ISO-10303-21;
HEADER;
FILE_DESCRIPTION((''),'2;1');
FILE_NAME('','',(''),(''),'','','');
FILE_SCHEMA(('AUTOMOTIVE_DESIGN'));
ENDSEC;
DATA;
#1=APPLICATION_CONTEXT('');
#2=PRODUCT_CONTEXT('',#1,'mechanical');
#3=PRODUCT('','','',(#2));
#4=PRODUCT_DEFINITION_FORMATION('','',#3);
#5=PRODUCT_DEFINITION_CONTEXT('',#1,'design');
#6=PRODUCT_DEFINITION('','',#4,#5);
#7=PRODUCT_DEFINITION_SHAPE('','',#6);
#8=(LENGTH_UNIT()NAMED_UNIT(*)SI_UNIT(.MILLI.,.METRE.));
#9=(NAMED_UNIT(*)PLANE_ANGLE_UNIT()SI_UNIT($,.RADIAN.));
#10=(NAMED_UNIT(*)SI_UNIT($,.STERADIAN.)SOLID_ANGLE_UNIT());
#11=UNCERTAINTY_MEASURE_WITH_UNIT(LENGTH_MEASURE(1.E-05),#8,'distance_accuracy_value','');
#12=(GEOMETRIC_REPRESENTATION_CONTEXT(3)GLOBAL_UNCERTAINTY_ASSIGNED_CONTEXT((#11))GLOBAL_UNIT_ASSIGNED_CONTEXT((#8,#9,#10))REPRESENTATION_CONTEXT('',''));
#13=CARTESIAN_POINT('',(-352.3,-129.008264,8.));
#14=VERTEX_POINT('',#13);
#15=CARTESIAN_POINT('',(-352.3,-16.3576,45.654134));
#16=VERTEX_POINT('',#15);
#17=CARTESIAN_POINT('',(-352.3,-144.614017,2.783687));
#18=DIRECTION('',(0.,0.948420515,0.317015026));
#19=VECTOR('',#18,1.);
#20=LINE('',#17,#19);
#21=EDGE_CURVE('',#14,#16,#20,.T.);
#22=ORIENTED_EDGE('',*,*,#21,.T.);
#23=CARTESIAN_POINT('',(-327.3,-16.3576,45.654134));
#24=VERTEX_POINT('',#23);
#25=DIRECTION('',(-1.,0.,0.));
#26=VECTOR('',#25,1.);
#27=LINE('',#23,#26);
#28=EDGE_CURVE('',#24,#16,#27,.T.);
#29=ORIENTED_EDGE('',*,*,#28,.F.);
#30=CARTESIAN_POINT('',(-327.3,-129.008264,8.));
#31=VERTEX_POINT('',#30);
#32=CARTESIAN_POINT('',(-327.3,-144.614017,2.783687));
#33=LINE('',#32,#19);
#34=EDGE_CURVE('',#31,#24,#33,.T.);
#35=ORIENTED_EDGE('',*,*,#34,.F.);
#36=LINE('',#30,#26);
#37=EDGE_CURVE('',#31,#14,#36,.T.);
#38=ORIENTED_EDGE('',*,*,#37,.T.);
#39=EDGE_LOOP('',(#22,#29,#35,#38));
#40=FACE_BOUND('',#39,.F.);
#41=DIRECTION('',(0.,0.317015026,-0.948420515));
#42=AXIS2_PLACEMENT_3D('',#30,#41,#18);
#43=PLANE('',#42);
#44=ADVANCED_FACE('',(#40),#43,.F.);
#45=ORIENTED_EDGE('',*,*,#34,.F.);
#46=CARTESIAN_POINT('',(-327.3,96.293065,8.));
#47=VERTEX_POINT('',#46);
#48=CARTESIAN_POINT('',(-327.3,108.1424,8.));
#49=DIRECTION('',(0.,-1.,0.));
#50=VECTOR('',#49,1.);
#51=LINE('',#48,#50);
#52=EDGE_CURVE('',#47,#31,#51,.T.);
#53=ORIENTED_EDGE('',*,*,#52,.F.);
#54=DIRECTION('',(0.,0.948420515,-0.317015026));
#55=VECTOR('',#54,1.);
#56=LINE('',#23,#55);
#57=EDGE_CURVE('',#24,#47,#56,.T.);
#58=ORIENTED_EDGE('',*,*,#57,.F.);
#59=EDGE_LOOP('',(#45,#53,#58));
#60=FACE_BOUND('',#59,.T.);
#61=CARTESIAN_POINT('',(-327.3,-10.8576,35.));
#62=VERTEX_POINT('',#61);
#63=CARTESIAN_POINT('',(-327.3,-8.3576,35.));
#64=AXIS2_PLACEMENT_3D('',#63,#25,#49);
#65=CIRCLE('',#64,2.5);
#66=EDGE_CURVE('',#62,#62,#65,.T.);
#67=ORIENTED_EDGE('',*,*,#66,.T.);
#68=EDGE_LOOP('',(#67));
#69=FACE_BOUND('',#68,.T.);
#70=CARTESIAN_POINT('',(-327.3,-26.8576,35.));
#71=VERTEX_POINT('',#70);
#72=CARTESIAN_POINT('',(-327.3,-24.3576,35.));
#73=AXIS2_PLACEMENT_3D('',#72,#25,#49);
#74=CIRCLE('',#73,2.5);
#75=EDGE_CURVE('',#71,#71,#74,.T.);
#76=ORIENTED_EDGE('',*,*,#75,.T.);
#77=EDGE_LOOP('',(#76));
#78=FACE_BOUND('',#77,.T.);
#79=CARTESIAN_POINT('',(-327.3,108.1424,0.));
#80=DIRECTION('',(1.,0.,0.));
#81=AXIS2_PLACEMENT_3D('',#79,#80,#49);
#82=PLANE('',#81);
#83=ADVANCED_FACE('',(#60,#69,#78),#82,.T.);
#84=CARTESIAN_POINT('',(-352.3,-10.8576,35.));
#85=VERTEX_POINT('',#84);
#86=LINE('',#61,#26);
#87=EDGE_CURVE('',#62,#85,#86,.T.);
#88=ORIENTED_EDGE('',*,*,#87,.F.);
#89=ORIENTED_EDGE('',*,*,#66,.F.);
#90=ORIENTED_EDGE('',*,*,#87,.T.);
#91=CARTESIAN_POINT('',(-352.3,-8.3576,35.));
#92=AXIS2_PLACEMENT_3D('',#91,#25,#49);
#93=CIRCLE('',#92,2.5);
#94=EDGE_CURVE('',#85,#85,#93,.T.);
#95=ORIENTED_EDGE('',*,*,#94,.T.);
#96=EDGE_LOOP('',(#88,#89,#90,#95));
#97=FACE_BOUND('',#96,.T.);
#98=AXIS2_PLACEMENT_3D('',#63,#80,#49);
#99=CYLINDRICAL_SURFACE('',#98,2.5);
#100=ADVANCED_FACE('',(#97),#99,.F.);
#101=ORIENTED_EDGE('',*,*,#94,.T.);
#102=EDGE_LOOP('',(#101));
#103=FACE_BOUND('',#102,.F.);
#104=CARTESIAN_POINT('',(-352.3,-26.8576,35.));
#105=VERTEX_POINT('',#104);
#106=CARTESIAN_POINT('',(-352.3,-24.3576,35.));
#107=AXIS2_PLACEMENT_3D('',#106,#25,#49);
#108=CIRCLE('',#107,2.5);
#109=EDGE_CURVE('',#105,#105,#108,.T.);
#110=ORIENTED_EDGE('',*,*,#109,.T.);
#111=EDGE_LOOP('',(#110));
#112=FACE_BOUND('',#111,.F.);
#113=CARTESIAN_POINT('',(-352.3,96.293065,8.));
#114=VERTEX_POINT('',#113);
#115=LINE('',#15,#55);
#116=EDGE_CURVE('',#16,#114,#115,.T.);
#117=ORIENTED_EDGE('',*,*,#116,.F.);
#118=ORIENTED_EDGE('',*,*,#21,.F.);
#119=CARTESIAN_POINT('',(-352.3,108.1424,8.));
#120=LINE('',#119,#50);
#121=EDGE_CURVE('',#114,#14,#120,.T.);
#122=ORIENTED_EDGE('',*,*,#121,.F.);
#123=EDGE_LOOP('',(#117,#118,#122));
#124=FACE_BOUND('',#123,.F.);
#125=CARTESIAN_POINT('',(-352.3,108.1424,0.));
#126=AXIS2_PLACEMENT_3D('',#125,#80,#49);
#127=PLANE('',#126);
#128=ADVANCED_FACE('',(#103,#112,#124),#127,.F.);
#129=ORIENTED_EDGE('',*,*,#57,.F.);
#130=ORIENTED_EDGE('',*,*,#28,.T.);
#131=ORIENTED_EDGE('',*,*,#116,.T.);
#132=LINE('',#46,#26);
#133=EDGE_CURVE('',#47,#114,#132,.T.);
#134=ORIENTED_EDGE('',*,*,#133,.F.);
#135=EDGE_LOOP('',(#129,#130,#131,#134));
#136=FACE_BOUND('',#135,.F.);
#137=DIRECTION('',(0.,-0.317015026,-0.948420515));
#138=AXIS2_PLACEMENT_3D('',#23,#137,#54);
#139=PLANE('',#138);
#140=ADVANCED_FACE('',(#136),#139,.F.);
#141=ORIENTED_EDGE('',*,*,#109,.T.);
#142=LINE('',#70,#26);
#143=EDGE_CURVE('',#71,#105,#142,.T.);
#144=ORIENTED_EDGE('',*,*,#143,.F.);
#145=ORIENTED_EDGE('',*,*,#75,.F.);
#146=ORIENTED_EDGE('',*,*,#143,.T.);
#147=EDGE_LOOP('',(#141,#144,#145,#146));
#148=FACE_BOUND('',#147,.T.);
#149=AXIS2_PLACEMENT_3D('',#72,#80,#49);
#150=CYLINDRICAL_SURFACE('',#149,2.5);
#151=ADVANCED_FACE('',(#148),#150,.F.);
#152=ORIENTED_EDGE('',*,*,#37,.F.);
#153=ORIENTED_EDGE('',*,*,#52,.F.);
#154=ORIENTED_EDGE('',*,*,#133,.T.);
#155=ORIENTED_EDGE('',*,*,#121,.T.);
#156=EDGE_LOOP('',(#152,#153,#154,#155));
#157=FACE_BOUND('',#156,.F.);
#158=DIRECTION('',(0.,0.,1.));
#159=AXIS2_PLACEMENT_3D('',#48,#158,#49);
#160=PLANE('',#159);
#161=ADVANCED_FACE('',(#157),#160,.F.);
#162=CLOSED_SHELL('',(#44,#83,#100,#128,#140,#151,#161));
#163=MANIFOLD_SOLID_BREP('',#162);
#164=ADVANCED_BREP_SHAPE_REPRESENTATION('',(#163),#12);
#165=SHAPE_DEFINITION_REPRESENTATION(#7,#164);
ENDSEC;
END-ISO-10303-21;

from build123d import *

# Parameters (mm, degrees)
F1_DEPTH  = 8
F3_DEPTH  = 621.7
F4_DEPTH  = 5.5
F7_DEPTH  = 5.5
F9_DEPTH  = 5.5
F11_DEPTH = 5.5
F13_DEPTH = 5.5
F15_DEPTH = 5.5
F17_DEPTH = 308.2
F18_DEPTH = 24
F20_DEPTH = 244.2
F21_DEPTH = 30.35
F22_R     = 2.5
F23_DEPTH = 0.5
F24_R     = 2.5
F25_DEPTH = 0.5
F26_R     = 2.5
F27_DEPTH = 0.5
F28_R     = 2.5
F29_DEPTH = 0.5
F30_W     = 14.1428571429
F30_H     = 18
F30_W_2   = 4.1785714286
F30_H_2   = 6.1071428571
F31_DEPTH = 0.5
F32_DEPTH = 25
F34_DEPTH = 8


# Not quite as in the source:
# - a feature of the source that left no trace in its solid (it failed there, or was rolled back) is left out


with BuildPart() as f1:
    # F0 (on Top) → F1 (new body)
    with BuildSketch(Plane.XY):
        Polygon((-327.3, 108.1424002851), (-327.3, -140.8575997149), (-102.6, -140.8575997149), (-102.6, -170.8575997149), (0, -170.8575997149), (0, -140.8575997149), (288.9, -140.8575997149), (288.9, 108.1424002851), (0, 108.1424002851), (0, 138.1424002851), (-102.6, 128.6424002851), (-102.6, 108.1424002851), align=None)
    extrude(amount=F1_DEPTH)

    # F2 (on face) → F3 (join)
    with BuildSketch(Plane.YZ.offset(288.9)):
        Polygon((-16.3575997149, 51.4532495908), (-146.3575997149, 8), (-140.8575997149, 8), (108.1424002851, 8), (113.6424002851, 8), align=None)
    extrude(amount=-F3_DEPTH)

    # F2 (on face) → F4 (join)
    with BuildSketch(Plane.YZ.offset(288.9)):
        Polygon((-16.3575997149, 51.4532495908), (-146.3575997149, 8), (113.6424002851, 8), align=None)
    extrude(amount=F4_DEPTH)

    # F5 (on face) → F7 (join)
    with BuildSketch(Plane.XZ.offset(170.8575997149)):
        Polygon((-51.3, 62.75), (-108.1, 8), (5.5, 8), align=None)
    extrude(amount=F7_DEPTH)

    # F8 (on face) → F9 (cut)
    with BuildSketch(Plane(origin=(-13.187163576, 142.4213666207, 0), x_dir=(-0.9957406741, -0.0921982106, 0), z_dir=(-0.0921982106, 0.9957406741, 0))):
        Polygon((91.8565413643, 4.3927081219), (38.2758658123, 55.8195932448), (-15.3048097397, 4.3927081219), align=None)
    extrude(amount=-F9_DEPTH, mode=Mode.SUBTRACT)

    # F10 (on face) → F11 (cut)
    with BuildSketch(Plane(origin=(-332.8, 0, 0), x_dir=(0, -1, 0), z_dir=(-1, 0, 0))):
        Polygon((144.6140170728, 2.7836871671), (16.3575997149, 45.6541342062), (-111.8988176431, 2.7836871671), align=None)
    extrude(amount=-F11_DEPTH, mode=Mode.SUBTRACT)

    # F12 (on face) → F13 (cut)
    with BuildSketch(Plane.YZ.offset(294.4)):
        Polygon((111.8988176431, 2.7836871671), (-16.3575997149, 45.6541342062), (-144.6140170728, 2.7836871671), align=None)
    extrude(amount=-F13_DEPTH, mode=Mode.SUBTRACT)

    # F14 (on face) → F15 (cut)
    with BuildSketch(Plane.XZ.offset(176.3575997149)):
        Polygon((1.6830285492, 4.0401099834), (-51.3, 55.1108989459), (-104.2830285492, 4.0401099834), align=None)
    extrude(amount=-F15_DEPTH, mode=Mode.SUBTRACT)

    # F16 (on face) → F17 (join)
    with BuildSketch(Plane.YZ.offset(294.4)):
        Polygon((-37.9123742622, 48.4659791319), (-36.6443145321, 44.6722981882), (-16.3575997149, 51.4532495908), (3.9291151024, 44.6722981882), (5.1971748325, 48.4659791319), (-16.3575997149, 55.670786811), align=None)
    extrude(amount=-F17_DEPTH)

    # F16 (on face) → F18 (cut)
    with BuildSketch(Plane.YZ.offset(294.4)):
        Polygon((-37.9123742622, 48.4659791319), (-36.6443145321, 44.6722981882), (-16.3575997149, 51.4532495908), (3.9291151024, 44.6722981882), (5.1971748325, 48.4659791319), (-16.3575997149, 55.670786811), align=None)
    extrude(amount=-F18_DEPTH, mode=Mode.SUBTRACT)

    # F19 (on face) → F20 (join)
    with BuildSketch(Plane(origin=(-332.8, 0, 0), x_dir=(0, -1, 0), z_dir=(-1, 0, 0))):
        Polygon((-5.1971748325, 48.4659791319), (-3.9291151024, 44.6722981882), (16.3575997149, 51.4532495908), (36.6443145321, 44.6722981882), (37.9123742622, 48.4659791319), (16.3575997149, 55.670786811), align=None)
    extrude(amount=-F20_DEPTH)

    # F19 (on face) → F21 (cut)
    with BuildSketch(Plane(origin=(-332.8, 0, 0), x_dir=(0, -1, 0), z_dir=(-1, 0, 0))):
        Polygon((-5.1971748325, 48.4659791319), (-3.9291151024, 44.6722981882), (16.3575997149, 51.4532495908), (36.6443145321, 44.6722981882), (37.9123742622, 48.4659791319), (16.3575997149, 55.670786811), align=None)
    extrude(amount=-F21_DEPTH, mode=Mode.SUBTRACT)

    # F22 (on face) → F23 (cut)
    with BuildSketch(Plane(origin=(-327.3, 0, 0), x_dir=(0, -1, 0), z_dir=(-1, 0, 0))):
        with Locations((8.3575997149, 35)):
            Circle(F22_R)
        with Locations((24.3575997149, 35)):
            Circle(F22_R)
    extrude(amount=-F23_DEPTH, mode=Mode.SUBTRACT)

    # F24 (on face) → F25 (cut)
    with BuildSketch(Plane.YZ.offset(288.9)):
        with Locations((-24.3575997149, 35)):
            Circle(F24_R)
        with Locations((-8.3575997149, 35)):
            Circle(F24_R)
    extrude(amount=-F25_DEPTH, mode=Mode.SUBTRACT)

    # F26 (on face) → F27 (cut)
    with BuildSketch(Plane.XZ.offset(170.8575997149)):
        with Locations((-59.3, 35)):
            Circle(F26_R)
        with Locations((-43.3, 35)):
            Circle(F26_R)
    extrude(amount=-F27_DEPTH, mode=Mode.SUBTRACT)

    # F28 (on face) → F29 (cut)
    with BuildSketch(Plane(origin=(-12.6822332802, 136.9681194259, 0), x_dir=(-0.9957406741, -0.0921982106, 0), z_dir=(-0.0921982106, 0.9957406741, 0))):
        with Locations((30.7829559704, 35)):
            Circle(F28_R)
        with Locations((46.7829559704, 35)):
            Circle(F28_R)
    extrude(amount=-F29_DEPTH, mode=Mode.SUBTRACT)

    # F30 (on face) → F31 (cut)
    with BuildSketch(Plane.YZ.offset(288.9)):
        with Locations((-16.3575997149, 14)):
            Rectangle(F30_W, F30_H)
        with Locations((-19.4111711434, 9.9821428571)):
            Rectangle(F30_W_2, F30_H_2, mode=Mode.SUBTRACT)
        with Locations((-13.3040282863, 9.9821428571)):
            Rectangle(F30_W_2, F30_H_2, mode=Mode.SUBTRACT)
        with Locations((-19.4111711434, 18.0178571429)):
            Rectangle(F30_W_2, F30_H_2, mode=Mode.SUBTRACT)
        with Locations((-13.3040282863, 18.0178571429)):
            Rectangle(F30_W_2, F30_H_2, mode=Mode.SUBTRACT)
        with Locations((18.6424002851, 14)):
            Rectangle(F30_W, F30_H)
        with Locations((15.5888288566, 9.9821428571)):
            Rectangle(F30_W_2, F30_H_2, mode=Mode.SUBTRACT)
        with Locations((21.6959717137, 9.9821428571)):
            Rectangle(F30_W_2, F30_H_2, mode=Mode.SUBTRACT)
        with Locations((15.5888288566, 18.0178571429)):
            Rectangle(F30_W_2, F30_H_2, mode=Mode.SUBTRACT)
        with Locations((21.6959717137, 18.0178571429)):
            Rectangle(F30_W_2, F30_H_2, mode=Mode.SUBTRACT)
        with Locations((-51.3575997149, 14)):
            Rectangle(F30_W, F30_H)
        with Locations((-54.4111711434, 9.9821428571)):
            Rectangle(F30_W_2, F30_H_2, mode=Mode.SUBTRACT)
        with Locations((-48.3040282863, 9.9821428571)):
            Rectangle(F30_W_2, F30_H_2, mode=Mode.SUBTRACT)
        with Locations((-54.4111711434, 18.0178571429)):
            Rectangle(F30_W_2, F30_H_2, mode=Mode.SUBTRACT)
        with Locations((-48.3040282863, 18.0178571429)):
            Rectangle(F30_W_2, F30_H_2, mode=Mode.SUBTRACT)
    extrude(amount=-F31_DEPTH, mode=Mode.SUBTRACT)


with BuildPart() as f32:
    # F32 (new): a face of the model
    f32_faces = [f1.part.faces().sort_by_distance(p)[0] for p in [
        (-327.3, -16.3575997149, 15.1372563079),
    ]]
    extrude(f32_faces, amount=F32_DEPTH)

    # F34 (cut): a face of the model
    f34_faces = [f32.faces().sort_by_distance(p)[0] for p in [
        (-339.8, -16.3575997149, 0),
    ]]
    extrude(f34_faces, amount=-F34_DEPTH, mode=Mode.SUBTRACT)


solid = f32.part
